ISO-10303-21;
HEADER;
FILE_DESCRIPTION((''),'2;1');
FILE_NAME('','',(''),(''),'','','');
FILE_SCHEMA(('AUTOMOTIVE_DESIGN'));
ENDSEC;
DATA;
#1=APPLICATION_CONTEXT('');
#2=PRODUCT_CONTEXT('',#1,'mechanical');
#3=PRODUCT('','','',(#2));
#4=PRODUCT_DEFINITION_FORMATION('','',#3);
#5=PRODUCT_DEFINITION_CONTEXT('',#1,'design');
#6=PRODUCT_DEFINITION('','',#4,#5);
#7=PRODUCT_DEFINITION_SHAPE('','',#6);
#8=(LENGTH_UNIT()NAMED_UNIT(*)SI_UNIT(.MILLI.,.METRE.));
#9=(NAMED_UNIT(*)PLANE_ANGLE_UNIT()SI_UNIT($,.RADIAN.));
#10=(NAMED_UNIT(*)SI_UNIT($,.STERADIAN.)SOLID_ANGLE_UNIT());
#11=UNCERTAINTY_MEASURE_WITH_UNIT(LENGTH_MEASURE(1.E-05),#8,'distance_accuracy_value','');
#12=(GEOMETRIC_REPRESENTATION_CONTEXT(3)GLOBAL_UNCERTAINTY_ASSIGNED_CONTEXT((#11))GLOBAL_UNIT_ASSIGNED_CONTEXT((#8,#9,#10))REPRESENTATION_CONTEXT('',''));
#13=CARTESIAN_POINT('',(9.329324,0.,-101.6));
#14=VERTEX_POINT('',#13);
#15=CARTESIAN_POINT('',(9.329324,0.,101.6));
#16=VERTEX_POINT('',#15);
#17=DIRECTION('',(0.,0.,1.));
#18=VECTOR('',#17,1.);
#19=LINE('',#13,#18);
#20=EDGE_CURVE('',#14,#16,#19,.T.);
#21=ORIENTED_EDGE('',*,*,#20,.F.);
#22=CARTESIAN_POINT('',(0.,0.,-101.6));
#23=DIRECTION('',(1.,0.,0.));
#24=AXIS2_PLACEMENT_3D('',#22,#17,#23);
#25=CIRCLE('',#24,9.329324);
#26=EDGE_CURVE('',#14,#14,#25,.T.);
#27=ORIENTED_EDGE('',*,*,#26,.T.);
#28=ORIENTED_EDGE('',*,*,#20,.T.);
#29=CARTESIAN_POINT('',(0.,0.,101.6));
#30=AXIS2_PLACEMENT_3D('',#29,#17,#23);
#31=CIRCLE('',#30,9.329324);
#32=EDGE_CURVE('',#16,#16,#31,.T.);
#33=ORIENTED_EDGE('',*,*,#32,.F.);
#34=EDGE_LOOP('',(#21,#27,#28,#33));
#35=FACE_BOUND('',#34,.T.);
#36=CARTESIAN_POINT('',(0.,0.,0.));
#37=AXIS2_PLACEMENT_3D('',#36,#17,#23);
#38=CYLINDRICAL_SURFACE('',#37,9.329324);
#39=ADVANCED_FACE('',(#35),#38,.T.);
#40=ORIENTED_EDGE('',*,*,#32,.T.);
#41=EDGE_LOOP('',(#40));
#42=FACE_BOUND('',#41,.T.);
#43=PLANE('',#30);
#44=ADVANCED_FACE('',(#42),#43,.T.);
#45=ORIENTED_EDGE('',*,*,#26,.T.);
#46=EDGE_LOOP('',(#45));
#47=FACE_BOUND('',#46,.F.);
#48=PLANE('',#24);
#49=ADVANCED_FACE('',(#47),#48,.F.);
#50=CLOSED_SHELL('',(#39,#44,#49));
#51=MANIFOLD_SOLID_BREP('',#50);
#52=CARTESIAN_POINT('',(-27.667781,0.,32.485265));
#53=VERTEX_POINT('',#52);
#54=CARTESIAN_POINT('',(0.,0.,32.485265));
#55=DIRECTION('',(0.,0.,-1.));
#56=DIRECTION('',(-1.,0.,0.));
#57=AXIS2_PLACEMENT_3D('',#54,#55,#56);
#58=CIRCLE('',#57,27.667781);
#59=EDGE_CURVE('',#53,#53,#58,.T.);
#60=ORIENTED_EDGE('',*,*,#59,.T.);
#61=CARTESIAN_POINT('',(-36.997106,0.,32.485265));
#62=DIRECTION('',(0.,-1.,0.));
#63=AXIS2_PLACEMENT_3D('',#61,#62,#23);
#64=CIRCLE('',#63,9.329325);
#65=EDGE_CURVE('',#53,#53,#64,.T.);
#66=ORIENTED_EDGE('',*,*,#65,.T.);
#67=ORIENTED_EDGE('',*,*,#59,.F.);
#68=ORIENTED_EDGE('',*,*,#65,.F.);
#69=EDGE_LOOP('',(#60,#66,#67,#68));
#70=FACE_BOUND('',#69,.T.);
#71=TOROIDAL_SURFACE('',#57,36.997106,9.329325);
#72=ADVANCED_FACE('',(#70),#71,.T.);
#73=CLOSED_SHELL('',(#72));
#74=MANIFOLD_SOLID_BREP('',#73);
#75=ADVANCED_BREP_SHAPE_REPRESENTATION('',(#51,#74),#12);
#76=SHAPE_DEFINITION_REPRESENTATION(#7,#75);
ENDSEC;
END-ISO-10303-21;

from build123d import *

# Parameters (mm, degrees)
F0_R          = 9.3293252752
F3_R          = 9.3293243603
F4_DEPTH      = 101.6
F4_DEPTH_BACK = 101.6


# Not quite as in the source:
# - the program builds the solid bodies; features that only make, move or delete a surface that nothing else refers to are left out


with BuildPart() as f2:
    # F0 (on Front) → F2 (revolve)
    with BuildSketch(Plane.XZ):
        with Locations((-36.9971059263, 32.4852652848)):
            Circle(F0_R)
    revolve(axis=Axis((0, 0, 12.4827632681), (0, 0, -1)))


with BuildPart() as f4:
    # F3 (on Top) → F4 (new body, two sides)
    with BuildSketch(Plane.XY) as f4_sk:
        Circle(F3_R)
    extrude(amount=F4_DEPTH)
    extrude(f4_sk.sketch, amount=-F4_DEPTH_BACK)


solid = Compound([f2.part, f4.part])
